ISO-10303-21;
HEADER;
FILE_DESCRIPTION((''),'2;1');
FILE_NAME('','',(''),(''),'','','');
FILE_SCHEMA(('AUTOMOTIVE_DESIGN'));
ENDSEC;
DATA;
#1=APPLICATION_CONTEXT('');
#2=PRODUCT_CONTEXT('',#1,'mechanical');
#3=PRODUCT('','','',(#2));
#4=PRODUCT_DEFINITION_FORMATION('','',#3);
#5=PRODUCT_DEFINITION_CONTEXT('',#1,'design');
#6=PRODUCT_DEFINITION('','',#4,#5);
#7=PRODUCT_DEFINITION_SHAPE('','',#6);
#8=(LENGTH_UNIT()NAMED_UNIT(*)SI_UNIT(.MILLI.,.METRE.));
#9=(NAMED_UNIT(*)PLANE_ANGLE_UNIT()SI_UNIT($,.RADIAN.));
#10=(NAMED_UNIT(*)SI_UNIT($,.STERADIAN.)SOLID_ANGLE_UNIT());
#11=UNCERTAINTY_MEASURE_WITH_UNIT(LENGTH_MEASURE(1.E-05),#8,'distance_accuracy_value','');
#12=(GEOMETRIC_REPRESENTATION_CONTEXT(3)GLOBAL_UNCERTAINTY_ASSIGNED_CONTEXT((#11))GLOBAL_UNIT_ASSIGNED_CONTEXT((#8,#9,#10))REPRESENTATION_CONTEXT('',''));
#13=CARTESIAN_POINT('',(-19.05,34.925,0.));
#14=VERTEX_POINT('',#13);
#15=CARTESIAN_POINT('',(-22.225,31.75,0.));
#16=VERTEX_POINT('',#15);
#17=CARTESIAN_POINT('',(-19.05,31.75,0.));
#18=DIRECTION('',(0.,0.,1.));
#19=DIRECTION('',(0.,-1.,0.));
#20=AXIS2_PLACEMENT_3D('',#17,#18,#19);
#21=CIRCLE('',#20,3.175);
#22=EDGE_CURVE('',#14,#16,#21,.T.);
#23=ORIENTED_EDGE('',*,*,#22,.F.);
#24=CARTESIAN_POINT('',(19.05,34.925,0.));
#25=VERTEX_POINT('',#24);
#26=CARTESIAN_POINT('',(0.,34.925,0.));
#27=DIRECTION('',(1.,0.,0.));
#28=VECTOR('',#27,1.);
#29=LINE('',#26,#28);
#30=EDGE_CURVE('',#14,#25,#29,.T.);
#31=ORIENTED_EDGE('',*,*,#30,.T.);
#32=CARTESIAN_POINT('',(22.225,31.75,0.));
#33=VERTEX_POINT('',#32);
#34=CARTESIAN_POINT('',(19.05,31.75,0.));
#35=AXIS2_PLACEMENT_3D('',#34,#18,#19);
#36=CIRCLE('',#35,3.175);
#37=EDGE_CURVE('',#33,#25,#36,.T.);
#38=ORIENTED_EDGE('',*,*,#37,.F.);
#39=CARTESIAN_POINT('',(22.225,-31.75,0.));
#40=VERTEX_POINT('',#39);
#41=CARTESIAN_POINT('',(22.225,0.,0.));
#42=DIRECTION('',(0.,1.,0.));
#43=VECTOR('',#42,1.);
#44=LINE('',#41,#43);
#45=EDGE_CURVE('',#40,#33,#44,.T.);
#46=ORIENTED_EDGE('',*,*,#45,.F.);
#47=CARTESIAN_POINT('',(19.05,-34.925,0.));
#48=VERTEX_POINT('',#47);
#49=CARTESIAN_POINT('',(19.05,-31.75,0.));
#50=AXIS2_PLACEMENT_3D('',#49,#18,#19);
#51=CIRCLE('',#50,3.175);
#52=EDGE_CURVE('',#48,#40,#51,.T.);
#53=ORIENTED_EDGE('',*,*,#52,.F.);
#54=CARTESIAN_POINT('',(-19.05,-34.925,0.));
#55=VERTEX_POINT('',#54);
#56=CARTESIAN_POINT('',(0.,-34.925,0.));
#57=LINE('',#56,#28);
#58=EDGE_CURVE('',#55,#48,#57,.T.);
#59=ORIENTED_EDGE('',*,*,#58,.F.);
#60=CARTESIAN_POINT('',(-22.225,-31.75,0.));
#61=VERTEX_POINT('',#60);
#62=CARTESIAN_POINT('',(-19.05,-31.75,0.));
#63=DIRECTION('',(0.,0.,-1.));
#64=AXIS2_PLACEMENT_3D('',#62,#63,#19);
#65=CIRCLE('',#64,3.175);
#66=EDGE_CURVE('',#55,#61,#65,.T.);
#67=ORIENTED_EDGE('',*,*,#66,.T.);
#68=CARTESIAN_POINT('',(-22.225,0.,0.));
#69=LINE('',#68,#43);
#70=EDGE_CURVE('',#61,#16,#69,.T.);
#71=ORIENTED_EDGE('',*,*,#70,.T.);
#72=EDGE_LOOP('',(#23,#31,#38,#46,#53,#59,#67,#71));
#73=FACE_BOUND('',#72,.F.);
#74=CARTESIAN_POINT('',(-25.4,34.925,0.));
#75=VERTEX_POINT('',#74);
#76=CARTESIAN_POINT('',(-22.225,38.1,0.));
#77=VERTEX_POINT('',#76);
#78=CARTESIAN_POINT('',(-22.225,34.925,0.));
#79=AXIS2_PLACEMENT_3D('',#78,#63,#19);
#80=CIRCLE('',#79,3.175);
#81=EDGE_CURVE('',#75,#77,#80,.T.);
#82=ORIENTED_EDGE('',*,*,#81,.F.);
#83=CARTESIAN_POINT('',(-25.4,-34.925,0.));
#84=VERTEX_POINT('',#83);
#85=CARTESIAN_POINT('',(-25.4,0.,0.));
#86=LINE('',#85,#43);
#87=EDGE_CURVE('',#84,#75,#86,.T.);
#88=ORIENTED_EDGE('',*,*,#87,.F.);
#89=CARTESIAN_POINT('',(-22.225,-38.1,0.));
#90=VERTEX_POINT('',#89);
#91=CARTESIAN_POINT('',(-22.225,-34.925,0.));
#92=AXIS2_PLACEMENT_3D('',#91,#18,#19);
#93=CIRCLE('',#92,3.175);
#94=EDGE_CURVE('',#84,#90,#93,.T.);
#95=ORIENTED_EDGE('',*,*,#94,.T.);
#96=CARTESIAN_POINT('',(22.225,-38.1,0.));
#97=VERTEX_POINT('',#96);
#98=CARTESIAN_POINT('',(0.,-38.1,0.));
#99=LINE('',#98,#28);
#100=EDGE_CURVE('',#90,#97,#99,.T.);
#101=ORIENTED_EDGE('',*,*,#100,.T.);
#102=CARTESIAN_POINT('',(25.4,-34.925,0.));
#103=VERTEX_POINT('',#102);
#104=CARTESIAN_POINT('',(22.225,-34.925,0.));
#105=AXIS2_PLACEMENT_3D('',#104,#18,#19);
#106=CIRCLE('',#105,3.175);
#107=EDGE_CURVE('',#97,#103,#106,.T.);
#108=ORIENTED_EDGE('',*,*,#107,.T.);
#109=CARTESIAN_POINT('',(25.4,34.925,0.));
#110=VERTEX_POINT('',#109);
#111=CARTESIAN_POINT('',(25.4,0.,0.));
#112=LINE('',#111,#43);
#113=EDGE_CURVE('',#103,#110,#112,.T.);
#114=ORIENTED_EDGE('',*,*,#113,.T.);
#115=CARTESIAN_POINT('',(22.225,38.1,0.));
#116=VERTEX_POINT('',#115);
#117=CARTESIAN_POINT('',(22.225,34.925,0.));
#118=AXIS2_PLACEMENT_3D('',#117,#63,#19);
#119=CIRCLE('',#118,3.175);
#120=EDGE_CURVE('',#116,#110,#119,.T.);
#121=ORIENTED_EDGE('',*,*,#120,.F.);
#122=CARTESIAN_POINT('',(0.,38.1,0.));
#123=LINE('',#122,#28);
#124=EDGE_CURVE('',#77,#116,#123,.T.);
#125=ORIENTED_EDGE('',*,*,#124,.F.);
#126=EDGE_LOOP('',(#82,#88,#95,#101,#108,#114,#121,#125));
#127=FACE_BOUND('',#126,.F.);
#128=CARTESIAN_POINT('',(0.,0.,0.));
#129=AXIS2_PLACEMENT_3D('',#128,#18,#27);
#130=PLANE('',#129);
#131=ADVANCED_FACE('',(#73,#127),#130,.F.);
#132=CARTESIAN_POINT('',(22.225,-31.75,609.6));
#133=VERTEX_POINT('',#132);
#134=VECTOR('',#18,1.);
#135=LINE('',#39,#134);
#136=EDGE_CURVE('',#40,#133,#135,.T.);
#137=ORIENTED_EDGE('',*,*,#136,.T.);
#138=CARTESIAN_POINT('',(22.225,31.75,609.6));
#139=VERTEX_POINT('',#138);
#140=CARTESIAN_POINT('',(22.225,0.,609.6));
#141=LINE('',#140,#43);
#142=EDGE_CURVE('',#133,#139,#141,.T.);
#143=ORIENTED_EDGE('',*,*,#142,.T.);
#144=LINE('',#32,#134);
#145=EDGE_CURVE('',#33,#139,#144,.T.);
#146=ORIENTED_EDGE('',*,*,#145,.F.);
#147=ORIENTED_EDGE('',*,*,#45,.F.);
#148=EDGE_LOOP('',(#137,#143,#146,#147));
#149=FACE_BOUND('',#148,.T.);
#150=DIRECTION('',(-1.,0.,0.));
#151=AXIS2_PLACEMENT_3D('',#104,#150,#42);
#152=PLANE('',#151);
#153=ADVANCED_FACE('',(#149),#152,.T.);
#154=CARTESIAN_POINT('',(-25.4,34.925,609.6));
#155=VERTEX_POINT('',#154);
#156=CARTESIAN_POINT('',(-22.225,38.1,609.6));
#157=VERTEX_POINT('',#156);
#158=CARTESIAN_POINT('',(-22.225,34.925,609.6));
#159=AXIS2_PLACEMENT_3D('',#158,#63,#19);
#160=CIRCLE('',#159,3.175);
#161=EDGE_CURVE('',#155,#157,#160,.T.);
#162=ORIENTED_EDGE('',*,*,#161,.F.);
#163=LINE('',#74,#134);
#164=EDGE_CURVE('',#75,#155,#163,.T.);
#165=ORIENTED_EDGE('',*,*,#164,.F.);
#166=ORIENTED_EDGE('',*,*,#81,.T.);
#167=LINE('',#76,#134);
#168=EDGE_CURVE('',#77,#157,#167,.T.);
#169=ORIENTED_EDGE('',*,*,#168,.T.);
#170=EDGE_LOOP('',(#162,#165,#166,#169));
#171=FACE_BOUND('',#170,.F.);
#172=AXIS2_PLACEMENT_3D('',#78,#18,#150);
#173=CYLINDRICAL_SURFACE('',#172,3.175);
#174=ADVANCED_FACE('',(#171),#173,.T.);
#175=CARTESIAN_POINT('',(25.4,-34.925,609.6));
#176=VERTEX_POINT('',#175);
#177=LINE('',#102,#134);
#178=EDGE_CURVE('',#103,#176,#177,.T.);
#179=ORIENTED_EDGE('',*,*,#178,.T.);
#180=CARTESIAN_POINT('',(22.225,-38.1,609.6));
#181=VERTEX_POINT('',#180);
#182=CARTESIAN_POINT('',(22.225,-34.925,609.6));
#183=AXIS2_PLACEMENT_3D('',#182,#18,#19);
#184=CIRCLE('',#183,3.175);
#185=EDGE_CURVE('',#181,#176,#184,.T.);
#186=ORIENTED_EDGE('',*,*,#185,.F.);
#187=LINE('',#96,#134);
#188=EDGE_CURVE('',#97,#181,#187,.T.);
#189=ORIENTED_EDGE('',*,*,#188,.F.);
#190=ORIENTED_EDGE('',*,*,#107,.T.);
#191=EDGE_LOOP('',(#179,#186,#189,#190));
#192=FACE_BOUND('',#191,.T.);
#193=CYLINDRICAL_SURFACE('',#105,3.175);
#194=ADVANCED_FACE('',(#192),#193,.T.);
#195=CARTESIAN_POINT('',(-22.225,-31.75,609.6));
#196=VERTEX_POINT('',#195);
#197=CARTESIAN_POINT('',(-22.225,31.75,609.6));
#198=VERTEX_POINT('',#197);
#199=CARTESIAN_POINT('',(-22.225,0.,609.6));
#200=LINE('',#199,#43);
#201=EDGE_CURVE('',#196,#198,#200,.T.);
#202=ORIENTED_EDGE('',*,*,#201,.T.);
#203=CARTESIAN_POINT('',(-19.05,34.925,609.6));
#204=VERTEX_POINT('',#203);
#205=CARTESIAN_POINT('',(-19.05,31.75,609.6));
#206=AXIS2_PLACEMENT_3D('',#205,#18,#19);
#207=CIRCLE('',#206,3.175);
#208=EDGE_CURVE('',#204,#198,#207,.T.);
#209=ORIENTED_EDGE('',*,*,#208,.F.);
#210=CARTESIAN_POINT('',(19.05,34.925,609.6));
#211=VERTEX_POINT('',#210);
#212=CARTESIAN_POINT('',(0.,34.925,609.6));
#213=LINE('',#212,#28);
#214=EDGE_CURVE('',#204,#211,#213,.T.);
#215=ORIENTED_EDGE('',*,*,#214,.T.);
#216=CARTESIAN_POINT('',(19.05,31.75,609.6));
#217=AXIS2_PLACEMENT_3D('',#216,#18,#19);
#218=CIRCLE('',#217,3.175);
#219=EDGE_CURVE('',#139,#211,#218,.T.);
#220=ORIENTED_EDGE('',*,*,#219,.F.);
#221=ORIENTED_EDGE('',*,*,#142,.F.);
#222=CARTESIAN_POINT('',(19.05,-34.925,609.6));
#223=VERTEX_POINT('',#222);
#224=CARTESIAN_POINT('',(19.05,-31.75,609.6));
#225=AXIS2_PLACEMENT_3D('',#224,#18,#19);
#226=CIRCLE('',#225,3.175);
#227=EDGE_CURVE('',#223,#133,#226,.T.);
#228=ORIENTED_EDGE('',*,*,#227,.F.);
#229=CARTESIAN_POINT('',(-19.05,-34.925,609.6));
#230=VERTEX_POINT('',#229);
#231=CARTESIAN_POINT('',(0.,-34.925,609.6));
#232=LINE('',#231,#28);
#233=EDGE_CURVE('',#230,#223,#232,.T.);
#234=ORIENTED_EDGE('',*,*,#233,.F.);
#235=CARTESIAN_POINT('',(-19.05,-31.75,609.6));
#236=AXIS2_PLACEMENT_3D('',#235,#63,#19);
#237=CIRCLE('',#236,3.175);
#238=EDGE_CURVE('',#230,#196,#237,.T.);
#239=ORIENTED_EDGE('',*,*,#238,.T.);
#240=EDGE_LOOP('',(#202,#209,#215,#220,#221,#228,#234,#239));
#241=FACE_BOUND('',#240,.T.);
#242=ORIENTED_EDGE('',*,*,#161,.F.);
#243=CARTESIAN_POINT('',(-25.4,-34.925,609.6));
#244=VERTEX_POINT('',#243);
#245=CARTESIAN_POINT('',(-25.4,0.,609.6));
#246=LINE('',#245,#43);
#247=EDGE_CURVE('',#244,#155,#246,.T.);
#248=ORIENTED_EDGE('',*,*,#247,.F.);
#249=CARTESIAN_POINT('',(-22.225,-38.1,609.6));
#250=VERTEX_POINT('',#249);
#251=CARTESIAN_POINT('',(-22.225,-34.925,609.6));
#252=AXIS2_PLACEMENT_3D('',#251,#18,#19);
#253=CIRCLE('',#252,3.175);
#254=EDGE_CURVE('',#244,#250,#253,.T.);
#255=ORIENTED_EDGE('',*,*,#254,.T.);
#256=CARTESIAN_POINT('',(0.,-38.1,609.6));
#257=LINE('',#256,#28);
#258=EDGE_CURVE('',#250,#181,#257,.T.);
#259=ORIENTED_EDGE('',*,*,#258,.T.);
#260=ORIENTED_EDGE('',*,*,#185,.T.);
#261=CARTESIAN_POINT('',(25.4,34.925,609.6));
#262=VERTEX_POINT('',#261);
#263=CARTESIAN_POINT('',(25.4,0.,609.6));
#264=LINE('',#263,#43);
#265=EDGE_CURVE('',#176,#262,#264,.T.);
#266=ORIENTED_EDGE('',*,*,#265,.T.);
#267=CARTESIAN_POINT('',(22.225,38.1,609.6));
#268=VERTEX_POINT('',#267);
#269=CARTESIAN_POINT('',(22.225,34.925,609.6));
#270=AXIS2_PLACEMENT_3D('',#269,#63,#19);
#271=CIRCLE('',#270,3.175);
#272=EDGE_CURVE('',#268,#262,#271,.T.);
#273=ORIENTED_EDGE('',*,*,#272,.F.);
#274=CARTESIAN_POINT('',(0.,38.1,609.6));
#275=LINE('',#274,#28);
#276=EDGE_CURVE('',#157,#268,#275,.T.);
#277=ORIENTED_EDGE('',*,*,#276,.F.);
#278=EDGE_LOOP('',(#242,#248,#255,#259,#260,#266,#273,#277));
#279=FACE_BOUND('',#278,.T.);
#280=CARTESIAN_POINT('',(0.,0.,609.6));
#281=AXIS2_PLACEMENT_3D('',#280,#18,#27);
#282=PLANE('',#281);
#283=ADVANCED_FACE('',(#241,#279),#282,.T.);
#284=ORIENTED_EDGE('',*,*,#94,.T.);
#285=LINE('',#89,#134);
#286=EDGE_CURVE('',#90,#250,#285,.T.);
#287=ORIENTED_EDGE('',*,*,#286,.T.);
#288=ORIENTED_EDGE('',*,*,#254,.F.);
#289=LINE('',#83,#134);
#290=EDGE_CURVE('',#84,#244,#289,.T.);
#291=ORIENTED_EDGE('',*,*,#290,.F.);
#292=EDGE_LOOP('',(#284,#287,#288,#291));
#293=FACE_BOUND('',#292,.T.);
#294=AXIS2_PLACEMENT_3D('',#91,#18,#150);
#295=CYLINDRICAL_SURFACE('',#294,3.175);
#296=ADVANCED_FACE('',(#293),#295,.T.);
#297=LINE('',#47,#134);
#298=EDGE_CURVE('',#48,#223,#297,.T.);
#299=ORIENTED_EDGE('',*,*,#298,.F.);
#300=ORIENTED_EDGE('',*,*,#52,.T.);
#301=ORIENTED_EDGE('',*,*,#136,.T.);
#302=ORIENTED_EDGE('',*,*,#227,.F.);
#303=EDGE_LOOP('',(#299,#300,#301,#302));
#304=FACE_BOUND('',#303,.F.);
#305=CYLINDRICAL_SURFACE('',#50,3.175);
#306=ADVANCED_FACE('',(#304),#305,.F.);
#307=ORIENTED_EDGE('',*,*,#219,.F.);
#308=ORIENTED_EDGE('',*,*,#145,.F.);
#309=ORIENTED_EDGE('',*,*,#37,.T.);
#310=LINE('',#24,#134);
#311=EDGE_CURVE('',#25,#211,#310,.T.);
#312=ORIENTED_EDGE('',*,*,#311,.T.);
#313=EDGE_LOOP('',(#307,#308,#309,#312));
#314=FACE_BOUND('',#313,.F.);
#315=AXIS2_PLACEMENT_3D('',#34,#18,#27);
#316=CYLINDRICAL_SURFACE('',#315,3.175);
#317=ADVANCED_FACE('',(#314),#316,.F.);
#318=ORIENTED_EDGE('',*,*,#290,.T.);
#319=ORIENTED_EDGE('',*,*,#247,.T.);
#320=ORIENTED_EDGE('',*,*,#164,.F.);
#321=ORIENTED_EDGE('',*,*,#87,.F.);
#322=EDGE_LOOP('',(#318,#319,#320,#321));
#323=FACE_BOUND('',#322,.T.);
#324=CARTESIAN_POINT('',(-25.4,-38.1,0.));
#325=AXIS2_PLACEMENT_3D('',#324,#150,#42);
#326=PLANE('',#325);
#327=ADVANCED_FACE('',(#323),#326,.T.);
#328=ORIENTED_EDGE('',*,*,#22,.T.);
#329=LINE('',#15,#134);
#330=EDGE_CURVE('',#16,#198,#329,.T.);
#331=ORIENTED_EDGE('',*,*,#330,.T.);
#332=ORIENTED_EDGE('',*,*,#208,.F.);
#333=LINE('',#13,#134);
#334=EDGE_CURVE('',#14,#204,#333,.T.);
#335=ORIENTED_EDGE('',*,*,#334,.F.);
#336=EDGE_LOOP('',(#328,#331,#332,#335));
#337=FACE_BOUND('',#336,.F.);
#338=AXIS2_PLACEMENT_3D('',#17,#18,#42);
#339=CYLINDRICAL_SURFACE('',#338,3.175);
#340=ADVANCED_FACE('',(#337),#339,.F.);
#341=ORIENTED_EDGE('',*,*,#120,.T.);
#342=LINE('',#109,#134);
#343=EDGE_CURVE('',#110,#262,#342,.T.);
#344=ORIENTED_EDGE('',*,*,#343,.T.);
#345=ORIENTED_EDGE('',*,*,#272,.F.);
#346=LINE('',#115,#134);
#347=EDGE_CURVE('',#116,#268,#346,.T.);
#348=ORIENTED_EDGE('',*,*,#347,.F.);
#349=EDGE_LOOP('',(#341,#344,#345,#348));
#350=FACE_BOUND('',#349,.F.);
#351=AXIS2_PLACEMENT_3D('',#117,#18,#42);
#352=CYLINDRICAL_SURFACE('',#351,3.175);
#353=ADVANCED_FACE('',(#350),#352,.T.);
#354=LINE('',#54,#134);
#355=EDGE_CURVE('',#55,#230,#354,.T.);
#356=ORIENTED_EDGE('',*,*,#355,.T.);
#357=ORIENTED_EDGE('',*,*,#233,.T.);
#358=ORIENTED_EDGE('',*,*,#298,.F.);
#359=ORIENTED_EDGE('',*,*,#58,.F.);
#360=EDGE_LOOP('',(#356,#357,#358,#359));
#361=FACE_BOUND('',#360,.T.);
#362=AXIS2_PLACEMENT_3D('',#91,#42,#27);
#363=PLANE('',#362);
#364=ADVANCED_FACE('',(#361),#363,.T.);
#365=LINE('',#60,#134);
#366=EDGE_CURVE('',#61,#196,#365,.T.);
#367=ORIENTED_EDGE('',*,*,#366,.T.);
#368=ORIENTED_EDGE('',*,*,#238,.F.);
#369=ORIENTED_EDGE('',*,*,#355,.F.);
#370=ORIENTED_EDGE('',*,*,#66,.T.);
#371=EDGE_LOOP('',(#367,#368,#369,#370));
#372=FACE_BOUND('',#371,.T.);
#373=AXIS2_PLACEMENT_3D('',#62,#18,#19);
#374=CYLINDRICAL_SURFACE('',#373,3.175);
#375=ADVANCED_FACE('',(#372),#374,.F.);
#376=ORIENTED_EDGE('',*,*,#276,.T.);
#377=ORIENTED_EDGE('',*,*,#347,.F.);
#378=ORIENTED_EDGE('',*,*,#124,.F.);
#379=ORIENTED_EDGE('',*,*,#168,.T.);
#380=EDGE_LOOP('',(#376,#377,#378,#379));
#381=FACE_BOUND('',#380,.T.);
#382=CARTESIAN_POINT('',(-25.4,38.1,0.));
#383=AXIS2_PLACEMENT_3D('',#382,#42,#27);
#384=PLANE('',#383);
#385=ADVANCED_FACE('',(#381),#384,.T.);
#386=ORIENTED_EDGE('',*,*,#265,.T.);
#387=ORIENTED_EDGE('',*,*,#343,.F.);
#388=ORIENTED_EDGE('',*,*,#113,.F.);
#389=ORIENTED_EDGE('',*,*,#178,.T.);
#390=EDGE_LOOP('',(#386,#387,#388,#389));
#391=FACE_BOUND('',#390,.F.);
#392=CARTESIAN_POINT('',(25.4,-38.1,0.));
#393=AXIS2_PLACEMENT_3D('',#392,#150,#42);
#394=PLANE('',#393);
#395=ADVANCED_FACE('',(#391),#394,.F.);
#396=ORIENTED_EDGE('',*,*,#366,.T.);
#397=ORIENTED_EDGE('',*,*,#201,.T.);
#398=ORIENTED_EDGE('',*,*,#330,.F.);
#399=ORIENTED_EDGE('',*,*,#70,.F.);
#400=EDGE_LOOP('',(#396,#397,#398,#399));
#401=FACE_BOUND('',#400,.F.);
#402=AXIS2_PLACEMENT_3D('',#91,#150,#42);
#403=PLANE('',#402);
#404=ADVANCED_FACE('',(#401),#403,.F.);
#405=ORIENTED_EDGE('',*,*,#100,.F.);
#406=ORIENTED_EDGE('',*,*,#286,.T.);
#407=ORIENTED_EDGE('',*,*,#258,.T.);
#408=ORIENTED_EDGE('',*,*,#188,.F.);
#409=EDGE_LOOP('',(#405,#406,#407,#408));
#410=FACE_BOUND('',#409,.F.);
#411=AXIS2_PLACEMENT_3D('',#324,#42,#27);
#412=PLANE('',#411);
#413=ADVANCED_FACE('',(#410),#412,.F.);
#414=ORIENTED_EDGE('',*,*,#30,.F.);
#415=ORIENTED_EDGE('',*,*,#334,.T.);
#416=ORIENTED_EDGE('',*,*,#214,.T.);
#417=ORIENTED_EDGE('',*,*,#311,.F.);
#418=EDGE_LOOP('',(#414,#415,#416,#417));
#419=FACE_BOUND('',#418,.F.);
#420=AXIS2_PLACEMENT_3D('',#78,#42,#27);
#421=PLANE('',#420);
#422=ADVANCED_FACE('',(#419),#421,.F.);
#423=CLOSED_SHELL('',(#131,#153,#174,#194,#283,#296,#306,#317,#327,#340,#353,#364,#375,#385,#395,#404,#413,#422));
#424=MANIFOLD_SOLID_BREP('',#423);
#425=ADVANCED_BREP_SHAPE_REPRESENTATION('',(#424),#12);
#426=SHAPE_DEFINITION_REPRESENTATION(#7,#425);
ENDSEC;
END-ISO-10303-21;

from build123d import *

# Parameters (mm, degrees)
F0_W     = 50.8
F0_H     = 76.2
F0_W_2   = 44.45
F0_H_2   = 69.85
F2_DEPTH = 609.6
F3_R     = 3.175


# Not quite as in the source:
# - a variable given as a bare number and used for a length is read in inches; the dataset says mm whatever the document's units were


with BuildPart() as f2:
    # F0 (on Top) → F2 (new body)
    with BuildSketch(Plane.XY):
        Rectangle(F0_W, F0_H)
        Rectangle(F0_W_2, F0_H_2, mode=Mode.SUBTRACT)
    extrude(amount=F2_DEPTH)

    # F3
    f3_edges = [f2.edges().sort_by_distance(p)[0] for p in [
        (-22.225, 34.925, 304.8),
        (22.225, 34.925, 304.8),
        (22.225, -34.925, 304.8),
        (-22.225, -34.925, 304.8),
        (25.4, 38.1, 304.8),
        (-25.4, 38.1, 304.8),
        (25.4, -38.1, 304.8),
        (-25.4, -38.1, 304.8),
    ]]
    fillet(f3_edges, radius=F3_R)


solid = f2.part
